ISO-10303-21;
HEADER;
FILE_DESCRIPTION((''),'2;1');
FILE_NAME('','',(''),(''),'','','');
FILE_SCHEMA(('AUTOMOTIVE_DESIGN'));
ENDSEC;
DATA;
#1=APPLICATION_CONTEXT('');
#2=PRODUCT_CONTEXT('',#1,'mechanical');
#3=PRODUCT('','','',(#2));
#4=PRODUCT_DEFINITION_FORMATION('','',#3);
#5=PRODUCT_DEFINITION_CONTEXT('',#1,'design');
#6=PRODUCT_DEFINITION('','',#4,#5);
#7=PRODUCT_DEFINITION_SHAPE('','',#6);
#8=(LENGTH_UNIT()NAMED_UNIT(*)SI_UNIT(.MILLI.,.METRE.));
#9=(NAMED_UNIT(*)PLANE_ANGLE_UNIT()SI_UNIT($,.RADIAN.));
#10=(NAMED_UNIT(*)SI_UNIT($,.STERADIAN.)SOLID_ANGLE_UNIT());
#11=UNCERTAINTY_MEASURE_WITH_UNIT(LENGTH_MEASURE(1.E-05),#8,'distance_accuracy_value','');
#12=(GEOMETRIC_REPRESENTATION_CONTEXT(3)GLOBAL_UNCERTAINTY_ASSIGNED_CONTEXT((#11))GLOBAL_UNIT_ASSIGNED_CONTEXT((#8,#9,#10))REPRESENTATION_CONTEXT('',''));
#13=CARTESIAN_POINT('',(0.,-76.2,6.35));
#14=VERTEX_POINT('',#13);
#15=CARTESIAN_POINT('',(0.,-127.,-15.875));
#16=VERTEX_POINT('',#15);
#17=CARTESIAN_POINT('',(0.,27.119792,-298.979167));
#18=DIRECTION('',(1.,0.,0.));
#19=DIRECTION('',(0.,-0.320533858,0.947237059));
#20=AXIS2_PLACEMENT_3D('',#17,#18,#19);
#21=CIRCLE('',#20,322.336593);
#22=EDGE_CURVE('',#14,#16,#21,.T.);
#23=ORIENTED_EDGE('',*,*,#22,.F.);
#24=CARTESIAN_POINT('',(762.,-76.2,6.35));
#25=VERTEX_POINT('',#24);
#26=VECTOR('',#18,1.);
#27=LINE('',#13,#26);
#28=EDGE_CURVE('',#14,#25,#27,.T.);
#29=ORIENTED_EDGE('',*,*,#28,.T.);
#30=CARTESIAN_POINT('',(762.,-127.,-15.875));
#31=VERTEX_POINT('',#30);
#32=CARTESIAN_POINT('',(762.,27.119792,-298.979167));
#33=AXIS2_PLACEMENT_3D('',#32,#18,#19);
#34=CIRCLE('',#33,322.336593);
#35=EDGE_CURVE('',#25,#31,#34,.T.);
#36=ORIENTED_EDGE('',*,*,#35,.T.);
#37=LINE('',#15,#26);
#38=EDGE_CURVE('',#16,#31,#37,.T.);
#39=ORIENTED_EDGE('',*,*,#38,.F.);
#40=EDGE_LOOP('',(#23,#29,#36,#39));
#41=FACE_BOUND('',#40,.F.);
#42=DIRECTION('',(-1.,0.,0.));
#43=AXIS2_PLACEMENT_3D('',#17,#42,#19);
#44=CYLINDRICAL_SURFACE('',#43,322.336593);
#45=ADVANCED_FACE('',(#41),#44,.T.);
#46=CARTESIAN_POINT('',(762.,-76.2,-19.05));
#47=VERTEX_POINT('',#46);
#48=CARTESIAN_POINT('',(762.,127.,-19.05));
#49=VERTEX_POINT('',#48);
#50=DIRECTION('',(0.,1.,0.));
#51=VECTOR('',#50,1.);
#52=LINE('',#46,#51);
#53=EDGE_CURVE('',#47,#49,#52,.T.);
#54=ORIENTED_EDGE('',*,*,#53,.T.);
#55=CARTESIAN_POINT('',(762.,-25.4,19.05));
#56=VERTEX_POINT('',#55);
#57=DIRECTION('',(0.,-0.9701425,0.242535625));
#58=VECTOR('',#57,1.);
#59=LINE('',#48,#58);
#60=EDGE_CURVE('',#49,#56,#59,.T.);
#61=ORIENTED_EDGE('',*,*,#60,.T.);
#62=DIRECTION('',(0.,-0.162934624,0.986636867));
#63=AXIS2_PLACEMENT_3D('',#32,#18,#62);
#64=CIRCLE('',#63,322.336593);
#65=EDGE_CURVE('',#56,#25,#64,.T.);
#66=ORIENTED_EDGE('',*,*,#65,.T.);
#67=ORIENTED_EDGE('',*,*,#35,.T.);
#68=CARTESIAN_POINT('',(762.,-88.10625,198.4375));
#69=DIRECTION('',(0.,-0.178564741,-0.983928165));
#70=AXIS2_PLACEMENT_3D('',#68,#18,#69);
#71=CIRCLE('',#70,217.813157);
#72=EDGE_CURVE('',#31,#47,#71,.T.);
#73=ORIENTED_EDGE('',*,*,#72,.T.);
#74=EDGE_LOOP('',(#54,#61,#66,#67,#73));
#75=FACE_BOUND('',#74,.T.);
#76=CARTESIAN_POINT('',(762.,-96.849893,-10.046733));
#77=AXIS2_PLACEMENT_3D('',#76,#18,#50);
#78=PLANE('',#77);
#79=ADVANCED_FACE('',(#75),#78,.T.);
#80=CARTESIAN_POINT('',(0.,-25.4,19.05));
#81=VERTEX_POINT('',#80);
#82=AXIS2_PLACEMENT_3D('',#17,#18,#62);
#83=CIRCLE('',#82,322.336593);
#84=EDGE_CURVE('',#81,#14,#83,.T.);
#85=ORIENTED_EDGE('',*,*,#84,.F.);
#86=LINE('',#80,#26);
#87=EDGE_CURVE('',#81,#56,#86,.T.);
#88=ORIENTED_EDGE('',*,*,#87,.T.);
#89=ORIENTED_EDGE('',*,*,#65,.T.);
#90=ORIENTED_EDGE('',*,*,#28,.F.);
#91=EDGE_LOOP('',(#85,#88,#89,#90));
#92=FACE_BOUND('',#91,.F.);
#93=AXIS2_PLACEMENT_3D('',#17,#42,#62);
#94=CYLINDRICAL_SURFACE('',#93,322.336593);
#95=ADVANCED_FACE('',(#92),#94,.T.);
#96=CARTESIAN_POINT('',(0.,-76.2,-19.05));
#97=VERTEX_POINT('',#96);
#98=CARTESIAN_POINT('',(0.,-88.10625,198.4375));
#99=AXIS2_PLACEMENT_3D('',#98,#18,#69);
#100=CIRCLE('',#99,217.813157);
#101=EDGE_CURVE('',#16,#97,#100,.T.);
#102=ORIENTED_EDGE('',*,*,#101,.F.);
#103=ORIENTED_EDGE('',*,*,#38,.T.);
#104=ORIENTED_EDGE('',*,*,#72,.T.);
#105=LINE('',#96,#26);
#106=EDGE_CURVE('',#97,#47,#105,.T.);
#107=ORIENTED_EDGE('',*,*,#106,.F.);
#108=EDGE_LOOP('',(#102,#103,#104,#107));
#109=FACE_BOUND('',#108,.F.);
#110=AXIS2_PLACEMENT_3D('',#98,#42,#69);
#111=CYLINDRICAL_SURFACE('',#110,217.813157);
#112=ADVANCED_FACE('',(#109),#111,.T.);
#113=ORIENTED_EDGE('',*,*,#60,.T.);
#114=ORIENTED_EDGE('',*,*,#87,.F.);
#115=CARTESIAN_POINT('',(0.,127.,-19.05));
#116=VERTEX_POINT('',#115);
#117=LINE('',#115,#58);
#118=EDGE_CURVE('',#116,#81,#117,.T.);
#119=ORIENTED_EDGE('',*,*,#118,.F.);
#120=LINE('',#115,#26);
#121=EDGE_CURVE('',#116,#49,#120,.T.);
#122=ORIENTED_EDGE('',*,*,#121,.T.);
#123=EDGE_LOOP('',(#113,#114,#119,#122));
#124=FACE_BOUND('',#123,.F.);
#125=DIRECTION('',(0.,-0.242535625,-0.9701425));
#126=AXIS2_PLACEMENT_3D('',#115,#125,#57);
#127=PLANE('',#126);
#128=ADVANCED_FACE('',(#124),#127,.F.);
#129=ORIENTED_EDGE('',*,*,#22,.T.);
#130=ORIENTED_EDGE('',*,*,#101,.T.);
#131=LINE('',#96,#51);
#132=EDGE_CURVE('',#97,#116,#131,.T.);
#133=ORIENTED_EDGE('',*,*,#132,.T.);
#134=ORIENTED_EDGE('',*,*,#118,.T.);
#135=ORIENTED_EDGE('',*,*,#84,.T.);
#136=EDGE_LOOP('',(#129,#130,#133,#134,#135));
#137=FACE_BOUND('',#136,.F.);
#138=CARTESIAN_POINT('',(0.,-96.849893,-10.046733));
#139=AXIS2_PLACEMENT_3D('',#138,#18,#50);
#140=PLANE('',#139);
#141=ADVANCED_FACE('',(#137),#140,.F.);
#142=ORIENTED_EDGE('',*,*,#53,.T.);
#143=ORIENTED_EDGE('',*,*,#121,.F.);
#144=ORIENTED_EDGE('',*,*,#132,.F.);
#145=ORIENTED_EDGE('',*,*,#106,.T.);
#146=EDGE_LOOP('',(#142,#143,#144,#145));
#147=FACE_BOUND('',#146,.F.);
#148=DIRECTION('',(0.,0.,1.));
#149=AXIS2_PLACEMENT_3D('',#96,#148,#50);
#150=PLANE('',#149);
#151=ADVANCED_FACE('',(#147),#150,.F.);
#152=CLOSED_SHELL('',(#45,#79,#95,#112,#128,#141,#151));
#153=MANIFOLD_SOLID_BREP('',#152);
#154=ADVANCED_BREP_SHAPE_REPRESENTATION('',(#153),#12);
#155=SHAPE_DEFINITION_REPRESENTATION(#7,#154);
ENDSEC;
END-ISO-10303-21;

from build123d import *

# Parameters (mm, degrees)
F1_DEPTH = 762


# Not quite as in the source:
# - a feature names something its author has since deleted; it is built from what else it names


with BuildPart() as f1:
    # F0 (on Right) → F1 (new body)
    with BuildSketch(Plane.YZ):
        with BuildLine():
            ThreePointArc((-76.2, 6.35), (-102.0787858137, -3.6681324257), (-127, -15.875))
            ThreePointArc((-127, -15.875), (-101.6930614476, -18.9514831615), (-76.2, -19.05))
            Line((-76.2, -19.05), (-76.2, -17.4625))
            Line((-76.2, -17.4625), (-76.2, 6.35))
        make_face()
        with BuildLine():
            Line((127, -19.05), (-25.4, 19.05))
            ThreePointArc((-25.4, 19.05), (-51.0583154566, 13.7332618264), (-76.2, 6.35))
            Line((-76.2, 6.35), (-76.2, -17.4625))
            Line((-76.2, -17.4625), (-76.2, -19.05))
            Line((-76.2, -19.05), (127, -19.05))
        make_face()
    extrude(amount=F1_DEPTH)


solid = f1.part
